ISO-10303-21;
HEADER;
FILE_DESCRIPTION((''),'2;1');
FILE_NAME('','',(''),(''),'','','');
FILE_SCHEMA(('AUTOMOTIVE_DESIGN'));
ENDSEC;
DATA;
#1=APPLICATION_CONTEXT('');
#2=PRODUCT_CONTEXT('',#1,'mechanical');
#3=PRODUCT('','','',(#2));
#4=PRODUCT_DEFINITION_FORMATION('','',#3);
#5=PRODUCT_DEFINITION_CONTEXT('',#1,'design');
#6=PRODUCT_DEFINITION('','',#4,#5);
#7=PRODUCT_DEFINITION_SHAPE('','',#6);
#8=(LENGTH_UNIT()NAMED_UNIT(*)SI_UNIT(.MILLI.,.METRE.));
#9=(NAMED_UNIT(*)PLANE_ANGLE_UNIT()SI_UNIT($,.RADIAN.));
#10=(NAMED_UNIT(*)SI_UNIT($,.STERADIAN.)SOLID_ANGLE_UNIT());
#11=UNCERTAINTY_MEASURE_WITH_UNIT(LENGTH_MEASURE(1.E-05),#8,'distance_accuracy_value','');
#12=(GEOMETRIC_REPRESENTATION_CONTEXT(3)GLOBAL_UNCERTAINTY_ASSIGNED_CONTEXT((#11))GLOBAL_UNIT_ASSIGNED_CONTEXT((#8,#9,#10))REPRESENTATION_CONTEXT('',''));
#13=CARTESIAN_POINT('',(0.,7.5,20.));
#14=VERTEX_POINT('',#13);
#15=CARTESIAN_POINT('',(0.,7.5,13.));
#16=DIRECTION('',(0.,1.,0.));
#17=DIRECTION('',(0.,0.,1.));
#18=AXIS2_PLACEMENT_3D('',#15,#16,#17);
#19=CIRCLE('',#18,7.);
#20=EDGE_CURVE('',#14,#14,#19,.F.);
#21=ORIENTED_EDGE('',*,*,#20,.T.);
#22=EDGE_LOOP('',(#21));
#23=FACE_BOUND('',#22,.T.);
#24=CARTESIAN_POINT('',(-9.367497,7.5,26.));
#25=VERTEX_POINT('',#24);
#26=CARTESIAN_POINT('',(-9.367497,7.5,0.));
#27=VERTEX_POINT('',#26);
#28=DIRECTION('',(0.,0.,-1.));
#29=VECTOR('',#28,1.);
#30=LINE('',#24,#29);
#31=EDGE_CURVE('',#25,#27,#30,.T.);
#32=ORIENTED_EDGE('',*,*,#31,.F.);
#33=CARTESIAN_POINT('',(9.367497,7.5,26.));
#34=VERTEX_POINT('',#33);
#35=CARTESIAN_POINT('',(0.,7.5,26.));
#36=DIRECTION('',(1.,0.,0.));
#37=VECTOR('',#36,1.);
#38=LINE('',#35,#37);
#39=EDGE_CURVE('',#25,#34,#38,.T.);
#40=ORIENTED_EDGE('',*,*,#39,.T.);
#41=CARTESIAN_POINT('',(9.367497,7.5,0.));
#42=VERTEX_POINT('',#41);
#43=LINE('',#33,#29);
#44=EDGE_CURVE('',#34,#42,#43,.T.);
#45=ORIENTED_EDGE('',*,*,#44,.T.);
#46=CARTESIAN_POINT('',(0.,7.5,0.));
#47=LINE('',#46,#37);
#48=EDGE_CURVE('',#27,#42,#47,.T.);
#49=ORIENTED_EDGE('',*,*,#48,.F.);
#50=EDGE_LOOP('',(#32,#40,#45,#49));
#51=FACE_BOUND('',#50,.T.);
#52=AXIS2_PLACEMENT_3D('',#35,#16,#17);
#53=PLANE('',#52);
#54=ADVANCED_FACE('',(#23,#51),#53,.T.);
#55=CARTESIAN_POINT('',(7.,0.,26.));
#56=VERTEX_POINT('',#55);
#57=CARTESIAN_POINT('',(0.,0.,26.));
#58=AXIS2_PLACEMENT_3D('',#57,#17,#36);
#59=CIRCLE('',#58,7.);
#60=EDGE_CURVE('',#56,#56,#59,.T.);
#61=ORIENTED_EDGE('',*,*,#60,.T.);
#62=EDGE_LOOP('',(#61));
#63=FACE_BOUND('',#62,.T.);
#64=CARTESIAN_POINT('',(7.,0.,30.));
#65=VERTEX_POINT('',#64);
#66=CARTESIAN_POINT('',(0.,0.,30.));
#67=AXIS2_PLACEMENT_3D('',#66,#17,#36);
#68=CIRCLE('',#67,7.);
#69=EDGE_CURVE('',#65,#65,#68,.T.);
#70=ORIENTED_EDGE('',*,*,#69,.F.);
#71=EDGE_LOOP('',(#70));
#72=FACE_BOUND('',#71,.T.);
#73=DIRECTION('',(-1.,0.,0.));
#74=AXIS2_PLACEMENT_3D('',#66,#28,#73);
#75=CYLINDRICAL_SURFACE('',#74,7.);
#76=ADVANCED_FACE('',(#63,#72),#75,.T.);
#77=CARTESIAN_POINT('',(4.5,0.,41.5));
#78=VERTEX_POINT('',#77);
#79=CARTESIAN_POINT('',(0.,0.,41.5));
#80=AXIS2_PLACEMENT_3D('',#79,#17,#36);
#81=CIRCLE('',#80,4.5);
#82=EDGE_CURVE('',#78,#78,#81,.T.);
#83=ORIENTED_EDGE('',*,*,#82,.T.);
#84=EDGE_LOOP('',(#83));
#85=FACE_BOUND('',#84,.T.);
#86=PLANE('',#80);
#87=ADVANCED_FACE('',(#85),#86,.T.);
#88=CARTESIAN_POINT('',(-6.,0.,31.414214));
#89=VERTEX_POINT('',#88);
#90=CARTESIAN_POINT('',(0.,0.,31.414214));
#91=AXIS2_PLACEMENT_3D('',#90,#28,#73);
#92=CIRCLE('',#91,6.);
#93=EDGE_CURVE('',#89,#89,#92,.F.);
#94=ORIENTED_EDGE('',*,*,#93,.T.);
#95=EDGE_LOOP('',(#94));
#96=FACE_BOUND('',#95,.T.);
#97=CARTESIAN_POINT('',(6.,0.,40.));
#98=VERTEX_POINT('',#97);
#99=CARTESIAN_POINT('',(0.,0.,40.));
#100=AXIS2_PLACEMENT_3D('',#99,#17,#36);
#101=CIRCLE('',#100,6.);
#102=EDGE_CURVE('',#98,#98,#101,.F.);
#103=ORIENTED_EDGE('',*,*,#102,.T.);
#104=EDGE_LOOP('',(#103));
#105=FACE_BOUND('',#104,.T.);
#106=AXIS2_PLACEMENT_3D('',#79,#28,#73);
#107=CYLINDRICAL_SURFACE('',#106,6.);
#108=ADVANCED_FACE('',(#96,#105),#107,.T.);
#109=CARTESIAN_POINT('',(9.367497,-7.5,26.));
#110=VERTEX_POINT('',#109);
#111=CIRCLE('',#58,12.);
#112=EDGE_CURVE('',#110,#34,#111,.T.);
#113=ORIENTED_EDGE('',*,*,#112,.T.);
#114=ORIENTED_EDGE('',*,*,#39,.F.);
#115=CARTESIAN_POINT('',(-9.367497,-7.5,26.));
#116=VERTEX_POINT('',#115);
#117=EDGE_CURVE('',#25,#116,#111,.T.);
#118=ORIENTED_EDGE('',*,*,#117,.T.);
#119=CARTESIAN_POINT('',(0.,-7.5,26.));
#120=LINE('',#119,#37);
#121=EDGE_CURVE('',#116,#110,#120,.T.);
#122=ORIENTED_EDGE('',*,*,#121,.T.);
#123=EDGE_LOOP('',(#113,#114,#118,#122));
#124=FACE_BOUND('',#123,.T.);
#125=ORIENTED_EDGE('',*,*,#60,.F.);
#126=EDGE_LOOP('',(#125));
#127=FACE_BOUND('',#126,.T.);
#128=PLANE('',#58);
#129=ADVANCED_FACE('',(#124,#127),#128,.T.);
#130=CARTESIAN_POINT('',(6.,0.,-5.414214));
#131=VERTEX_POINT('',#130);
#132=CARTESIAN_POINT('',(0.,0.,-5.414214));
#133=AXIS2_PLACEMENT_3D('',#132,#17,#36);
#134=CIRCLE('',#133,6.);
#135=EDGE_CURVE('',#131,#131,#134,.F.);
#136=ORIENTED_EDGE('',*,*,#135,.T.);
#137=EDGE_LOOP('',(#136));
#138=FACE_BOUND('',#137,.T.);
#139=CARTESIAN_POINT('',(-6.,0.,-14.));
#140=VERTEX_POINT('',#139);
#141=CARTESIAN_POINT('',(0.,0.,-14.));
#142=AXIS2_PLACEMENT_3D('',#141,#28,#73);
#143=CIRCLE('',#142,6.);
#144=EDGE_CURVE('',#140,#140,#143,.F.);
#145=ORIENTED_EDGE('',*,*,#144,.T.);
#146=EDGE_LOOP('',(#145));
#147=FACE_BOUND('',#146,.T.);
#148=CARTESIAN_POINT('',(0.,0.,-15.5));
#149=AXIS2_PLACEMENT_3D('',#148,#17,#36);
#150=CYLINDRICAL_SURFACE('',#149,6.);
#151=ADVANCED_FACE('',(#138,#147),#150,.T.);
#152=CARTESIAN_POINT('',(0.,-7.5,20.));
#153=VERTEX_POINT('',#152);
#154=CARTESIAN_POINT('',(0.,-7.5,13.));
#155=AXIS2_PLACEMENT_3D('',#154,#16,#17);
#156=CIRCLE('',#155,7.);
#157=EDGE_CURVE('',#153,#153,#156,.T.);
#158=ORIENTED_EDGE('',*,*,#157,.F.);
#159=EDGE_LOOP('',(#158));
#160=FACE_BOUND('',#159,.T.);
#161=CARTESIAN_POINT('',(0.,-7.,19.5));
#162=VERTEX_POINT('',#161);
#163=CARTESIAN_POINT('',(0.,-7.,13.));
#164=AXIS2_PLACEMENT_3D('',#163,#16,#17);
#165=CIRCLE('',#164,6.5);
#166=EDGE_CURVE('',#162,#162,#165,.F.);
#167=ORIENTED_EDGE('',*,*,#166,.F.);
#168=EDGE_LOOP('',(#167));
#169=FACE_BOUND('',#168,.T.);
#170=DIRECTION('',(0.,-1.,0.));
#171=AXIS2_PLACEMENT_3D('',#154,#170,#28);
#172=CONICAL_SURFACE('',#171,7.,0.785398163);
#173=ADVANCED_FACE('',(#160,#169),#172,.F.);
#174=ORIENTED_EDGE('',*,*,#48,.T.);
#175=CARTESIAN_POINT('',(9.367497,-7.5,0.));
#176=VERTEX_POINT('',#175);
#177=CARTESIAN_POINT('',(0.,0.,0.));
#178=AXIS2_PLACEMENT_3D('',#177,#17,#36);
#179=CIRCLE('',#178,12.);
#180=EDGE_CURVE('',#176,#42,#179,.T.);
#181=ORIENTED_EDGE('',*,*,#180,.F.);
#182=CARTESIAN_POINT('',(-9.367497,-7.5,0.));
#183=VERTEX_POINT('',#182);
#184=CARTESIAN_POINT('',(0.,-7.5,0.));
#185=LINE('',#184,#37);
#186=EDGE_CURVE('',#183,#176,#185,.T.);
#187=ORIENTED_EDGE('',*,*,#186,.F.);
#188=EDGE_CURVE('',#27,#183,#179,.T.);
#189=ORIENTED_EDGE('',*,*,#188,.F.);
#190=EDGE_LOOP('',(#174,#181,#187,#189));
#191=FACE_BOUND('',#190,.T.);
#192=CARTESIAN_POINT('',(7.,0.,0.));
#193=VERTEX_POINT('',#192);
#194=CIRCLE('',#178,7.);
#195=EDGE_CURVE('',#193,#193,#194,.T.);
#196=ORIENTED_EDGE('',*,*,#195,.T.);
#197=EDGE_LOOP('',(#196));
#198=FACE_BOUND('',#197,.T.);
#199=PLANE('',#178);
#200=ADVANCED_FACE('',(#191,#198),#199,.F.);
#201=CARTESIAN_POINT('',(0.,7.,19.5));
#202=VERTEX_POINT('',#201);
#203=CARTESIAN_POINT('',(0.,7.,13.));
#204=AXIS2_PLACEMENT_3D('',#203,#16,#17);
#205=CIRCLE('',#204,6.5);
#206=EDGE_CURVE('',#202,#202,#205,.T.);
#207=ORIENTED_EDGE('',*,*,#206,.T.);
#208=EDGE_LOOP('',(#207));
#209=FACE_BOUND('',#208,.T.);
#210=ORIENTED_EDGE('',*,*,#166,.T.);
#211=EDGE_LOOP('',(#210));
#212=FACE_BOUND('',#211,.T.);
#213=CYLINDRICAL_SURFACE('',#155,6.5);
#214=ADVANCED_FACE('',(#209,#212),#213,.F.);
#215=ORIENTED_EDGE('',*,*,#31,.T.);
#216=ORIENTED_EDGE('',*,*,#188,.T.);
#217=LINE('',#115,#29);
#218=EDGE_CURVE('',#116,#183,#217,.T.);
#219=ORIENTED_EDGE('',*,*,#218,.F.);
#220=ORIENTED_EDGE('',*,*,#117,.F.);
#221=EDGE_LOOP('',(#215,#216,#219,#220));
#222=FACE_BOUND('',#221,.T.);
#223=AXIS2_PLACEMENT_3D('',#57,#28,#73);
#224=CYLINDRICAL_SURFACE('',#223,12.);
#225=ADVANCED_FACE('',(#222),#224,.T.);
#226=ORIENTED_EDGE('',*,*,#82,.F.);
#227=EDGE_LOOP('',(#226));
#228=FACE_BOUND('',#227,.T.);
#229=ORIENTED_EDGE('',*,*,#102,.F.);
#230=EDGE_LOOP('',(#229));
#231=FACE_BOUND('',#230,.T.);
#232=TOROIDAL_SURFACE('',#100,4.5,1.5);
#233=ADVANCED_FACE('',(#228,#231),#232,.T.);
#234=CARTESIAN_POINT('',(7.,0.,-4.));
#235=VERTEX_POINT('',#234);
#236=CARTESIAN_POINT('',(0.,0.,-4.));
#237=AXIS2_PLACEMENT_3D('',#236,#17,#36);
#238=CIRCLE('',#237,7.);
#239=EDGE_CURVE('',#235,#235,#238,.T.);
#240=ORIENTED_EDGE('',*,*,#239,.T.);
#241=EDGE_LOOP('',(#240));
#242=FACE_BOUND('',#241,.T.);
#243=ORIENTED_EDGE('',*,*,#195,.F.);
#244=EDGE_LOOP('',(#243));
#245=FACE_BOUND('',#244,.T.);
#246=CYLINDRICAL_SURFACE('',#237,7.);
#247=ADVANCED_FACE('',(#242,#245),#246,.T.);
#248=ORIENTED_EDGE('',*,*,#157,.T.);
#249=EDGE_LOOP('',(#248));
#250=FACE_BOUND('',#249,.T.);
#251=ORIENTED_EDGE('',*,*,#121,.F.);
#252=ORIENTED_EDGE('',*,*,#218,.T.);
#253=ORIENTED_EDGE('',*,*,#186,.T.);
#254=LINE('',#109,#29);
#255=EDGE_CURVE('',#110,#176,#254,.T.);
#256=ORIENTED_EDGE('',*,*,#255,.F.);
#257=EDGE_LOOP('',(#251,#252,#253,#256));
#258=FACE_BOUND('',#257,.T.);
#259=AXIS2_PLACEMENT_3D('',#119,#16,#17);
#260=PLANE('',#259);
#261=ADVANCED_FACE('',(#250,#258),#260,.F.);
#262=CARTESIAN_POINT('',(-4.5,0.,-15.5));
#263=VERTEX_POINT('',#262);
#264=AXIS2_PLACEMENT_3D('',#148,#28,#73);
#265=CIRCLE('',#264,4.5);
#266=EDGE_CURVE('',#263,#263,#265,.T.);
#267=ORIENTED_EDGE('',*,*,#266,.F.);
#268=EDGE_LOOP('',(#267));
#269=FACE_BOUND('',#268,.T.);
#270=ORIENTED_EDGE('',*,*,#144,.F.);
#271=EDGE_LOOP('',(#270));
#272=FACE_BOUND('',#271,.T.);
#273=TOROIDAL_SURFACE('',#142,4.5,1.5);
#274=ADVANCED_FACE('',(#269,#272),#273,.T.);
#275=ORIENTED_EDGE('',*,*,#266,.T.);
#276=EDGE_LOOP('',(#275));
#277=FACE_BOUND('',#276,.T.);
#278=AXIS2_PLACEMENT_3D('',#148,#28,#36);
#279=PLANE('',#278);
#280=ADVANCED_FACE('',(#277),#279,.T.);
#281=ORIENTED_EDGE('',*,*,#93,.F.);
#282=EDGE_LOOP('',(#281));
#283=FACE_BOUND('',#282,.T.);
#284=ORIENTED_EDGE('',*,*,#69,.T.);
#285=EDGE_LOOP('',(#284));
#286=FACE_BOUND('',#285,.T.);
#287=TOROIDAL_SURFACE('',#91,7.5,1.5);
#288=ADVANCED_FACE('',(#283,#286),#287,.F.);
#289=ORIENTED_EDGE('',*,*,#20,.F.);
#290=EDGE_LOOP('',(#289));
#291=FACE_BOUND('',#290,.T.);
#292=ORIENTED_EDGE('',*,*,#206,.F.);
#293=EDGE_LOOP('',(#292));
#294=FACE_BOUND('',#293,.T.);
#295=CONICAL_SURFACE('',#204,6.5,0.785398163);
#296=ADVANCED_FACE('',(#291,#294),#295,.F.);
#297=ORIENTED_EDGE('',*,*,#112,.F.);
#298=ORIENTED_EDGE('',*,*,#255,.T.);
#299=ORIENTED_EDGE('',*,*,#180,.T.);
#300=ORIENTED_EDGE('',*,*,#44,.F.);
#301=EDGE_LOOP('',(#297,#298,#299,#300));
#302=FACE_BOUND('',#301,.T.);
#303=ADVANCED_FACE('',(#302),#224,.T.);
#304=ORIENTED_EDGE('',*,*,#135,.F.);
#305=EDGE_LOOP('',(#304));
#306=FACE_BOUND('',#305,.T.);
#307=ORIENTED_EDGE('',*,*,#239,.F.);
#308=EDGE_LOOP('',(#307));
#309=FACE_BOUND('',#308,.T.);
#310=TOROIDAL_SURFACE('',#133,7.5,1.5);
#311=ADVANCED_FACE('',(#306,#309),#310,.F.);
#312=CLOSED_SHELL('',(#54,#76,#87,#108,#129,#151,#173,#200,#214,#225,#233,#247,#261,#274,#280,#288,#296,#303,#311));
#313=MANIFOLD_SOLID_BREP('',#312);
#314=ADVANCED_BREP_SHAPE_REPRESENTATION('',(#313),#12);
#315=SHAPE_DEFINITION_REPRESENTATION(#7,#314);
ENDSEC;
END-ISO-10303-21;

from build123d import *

# Parameters (mm, degrees)
SKETCH1_W           = 18.734993996
SKETCH1_H           = 15
BOSS_EXTRUDE1_DEPTH = 26
SKETCH2_R           = 6.5
CUT_EXTRUDE1_DEPTH  = 33.32645975
CHAMFER1_SIZE       = 0.5
SKETCH3_R           = 7
BOSS_EXTRUDE2_DEPTH = 4
SKETCH4_R           = 6
BOSS_EXTRUDE3_DEPTH = 11.5
FILLET1_R           = 1.5


with BuildPart() as part:
    # Sketch1 → Boss-Extrude1 (new body)
    with BuildSketch(Plane.XY):
        Rectangle(SKETCH1_W, SKETCH1_H)
        with BuildLine():
            ThreePointArc((-9.367496998, 7.5), (-12, 0), (-9.367496998, -7.5))
            Line((-9.367496998, -7.5), (-9.367496998, 7.5))
        make_face()
        with BuildLine():
            Line((9.367496998, 7.5), (9.367496998, -7.5))
            ThreePointArc((9.367496998, -7.5), (11.322763885, -3.974294656), (12, 0))
            ThreePointArc((12, 0), (11.322763885, 3.974294656), (9.367496998, 7.5))
        make_face()
    extrude(amount=BOSS_EXTRUDE1_DEPTH)

    # Sketch2 → Cut-Extrude1 (cut, through all)
    with BuildSketch(Plane(origin=(0, 7.5, 0), x_dir=(1, 0, 0), z_dir=(0, 1, 0))):
        with Locations(Location((0, -13, 0), (0, 0, 270))):
            Circle(SKETCH2_R)
    extrude(amount=-CUT_EXTRUDE1_DEPTH, mode=Mode.SUBTRACT)

    # Chamfer1
    chamfer1_edges = [part.edges().sort_by_distance(p)[0] for p in [
        (0, -7.5, 6.5),
        (0, 7.5, 6.5),
    ]]
    chamfer(chamfer1_edges, length=CHAMFER1_SIZE)

    # Sketch3 → Boss-Extrude2 (add)
    with BuildSketch(Plane.XY.offset(26)):
        Circle(SKETCH3_R)
    extrude(amount=BOSS_EXTRUDE2_DEPTH)

    # Sketch4 → Boss-Extrude3 (add)
    with BuildSketch(Plane.XY.offset(30)):
        Circle(SKETCH4_R)
    extrude(amount=BOSS_EXTRUDE3_DEPTH)

    # Fillet1
    # the kernel refuses this fillet: 1.5 mm, written as the material it adds along each edge
    with BuildSketch(Plane(origin=(0, 0, 30), x_dir=(1, 0, 0), z_dir=(0, -1, 0))) as fillet1_piece_1:
        with BuildLine():
            CenterArc((7.5, 1.414213562), FILLET1_R, 180, 70.528779366)
            Line((6, 1.414213562), (6, 0))
            Line((6, 0), (7, 0))
        make_face()
    revolve(axis=Axis((0, 0, 30), (0, 0, 1)))
    # the kernel refuses this fillet: 1.5 mm, written as the material it takes off along each edge
    with BuildSketch(Plane(origin=(0, 0, 41.5), x_dir=(1, 0, 0), z_dir=(0, -1, 0))) as fillet1_2_piece_1:
        with BuildLine():
            CenterArc((6 - FILLET1_R, -FILLET1_R), FILLET1_R, 0, 90)
            Line((6 - FILLET1_R, 0), (6, 0))
            Line((6, 0), (6, -FILLET1_R))
        make_face()
    revolve(axis=Axis((0, 0, 41.5), (0, 0, 1)), mode=Mode.SUBTRACT)

    # Mirror1: read off the stored shape, not the designer's step
    # Mirror1 outline → Mirror1 (revolve)
    with BuildSketch(Plane.XZ):
        with BuildLine():
            ThreePointArc((6, -5.414213562), (6.275255129, -4.548188159), (7, -4))
            Line((7, -4), (7, 0))
            Line((7, 0), (0, 0))
            Line((0, 0), (0, -15.5))
            Line((0, -15.5), (4.5, -15.5))
            ThreePointArc((4.5, -15.5), (5.560660172, -15.060660172), (6, -14))
            Line((6, -14), (6, -5.414213562))
        make_face()
    revolve(axis=Axis((0, 0, 0), (0, 0, 1)))


solid = part.part
